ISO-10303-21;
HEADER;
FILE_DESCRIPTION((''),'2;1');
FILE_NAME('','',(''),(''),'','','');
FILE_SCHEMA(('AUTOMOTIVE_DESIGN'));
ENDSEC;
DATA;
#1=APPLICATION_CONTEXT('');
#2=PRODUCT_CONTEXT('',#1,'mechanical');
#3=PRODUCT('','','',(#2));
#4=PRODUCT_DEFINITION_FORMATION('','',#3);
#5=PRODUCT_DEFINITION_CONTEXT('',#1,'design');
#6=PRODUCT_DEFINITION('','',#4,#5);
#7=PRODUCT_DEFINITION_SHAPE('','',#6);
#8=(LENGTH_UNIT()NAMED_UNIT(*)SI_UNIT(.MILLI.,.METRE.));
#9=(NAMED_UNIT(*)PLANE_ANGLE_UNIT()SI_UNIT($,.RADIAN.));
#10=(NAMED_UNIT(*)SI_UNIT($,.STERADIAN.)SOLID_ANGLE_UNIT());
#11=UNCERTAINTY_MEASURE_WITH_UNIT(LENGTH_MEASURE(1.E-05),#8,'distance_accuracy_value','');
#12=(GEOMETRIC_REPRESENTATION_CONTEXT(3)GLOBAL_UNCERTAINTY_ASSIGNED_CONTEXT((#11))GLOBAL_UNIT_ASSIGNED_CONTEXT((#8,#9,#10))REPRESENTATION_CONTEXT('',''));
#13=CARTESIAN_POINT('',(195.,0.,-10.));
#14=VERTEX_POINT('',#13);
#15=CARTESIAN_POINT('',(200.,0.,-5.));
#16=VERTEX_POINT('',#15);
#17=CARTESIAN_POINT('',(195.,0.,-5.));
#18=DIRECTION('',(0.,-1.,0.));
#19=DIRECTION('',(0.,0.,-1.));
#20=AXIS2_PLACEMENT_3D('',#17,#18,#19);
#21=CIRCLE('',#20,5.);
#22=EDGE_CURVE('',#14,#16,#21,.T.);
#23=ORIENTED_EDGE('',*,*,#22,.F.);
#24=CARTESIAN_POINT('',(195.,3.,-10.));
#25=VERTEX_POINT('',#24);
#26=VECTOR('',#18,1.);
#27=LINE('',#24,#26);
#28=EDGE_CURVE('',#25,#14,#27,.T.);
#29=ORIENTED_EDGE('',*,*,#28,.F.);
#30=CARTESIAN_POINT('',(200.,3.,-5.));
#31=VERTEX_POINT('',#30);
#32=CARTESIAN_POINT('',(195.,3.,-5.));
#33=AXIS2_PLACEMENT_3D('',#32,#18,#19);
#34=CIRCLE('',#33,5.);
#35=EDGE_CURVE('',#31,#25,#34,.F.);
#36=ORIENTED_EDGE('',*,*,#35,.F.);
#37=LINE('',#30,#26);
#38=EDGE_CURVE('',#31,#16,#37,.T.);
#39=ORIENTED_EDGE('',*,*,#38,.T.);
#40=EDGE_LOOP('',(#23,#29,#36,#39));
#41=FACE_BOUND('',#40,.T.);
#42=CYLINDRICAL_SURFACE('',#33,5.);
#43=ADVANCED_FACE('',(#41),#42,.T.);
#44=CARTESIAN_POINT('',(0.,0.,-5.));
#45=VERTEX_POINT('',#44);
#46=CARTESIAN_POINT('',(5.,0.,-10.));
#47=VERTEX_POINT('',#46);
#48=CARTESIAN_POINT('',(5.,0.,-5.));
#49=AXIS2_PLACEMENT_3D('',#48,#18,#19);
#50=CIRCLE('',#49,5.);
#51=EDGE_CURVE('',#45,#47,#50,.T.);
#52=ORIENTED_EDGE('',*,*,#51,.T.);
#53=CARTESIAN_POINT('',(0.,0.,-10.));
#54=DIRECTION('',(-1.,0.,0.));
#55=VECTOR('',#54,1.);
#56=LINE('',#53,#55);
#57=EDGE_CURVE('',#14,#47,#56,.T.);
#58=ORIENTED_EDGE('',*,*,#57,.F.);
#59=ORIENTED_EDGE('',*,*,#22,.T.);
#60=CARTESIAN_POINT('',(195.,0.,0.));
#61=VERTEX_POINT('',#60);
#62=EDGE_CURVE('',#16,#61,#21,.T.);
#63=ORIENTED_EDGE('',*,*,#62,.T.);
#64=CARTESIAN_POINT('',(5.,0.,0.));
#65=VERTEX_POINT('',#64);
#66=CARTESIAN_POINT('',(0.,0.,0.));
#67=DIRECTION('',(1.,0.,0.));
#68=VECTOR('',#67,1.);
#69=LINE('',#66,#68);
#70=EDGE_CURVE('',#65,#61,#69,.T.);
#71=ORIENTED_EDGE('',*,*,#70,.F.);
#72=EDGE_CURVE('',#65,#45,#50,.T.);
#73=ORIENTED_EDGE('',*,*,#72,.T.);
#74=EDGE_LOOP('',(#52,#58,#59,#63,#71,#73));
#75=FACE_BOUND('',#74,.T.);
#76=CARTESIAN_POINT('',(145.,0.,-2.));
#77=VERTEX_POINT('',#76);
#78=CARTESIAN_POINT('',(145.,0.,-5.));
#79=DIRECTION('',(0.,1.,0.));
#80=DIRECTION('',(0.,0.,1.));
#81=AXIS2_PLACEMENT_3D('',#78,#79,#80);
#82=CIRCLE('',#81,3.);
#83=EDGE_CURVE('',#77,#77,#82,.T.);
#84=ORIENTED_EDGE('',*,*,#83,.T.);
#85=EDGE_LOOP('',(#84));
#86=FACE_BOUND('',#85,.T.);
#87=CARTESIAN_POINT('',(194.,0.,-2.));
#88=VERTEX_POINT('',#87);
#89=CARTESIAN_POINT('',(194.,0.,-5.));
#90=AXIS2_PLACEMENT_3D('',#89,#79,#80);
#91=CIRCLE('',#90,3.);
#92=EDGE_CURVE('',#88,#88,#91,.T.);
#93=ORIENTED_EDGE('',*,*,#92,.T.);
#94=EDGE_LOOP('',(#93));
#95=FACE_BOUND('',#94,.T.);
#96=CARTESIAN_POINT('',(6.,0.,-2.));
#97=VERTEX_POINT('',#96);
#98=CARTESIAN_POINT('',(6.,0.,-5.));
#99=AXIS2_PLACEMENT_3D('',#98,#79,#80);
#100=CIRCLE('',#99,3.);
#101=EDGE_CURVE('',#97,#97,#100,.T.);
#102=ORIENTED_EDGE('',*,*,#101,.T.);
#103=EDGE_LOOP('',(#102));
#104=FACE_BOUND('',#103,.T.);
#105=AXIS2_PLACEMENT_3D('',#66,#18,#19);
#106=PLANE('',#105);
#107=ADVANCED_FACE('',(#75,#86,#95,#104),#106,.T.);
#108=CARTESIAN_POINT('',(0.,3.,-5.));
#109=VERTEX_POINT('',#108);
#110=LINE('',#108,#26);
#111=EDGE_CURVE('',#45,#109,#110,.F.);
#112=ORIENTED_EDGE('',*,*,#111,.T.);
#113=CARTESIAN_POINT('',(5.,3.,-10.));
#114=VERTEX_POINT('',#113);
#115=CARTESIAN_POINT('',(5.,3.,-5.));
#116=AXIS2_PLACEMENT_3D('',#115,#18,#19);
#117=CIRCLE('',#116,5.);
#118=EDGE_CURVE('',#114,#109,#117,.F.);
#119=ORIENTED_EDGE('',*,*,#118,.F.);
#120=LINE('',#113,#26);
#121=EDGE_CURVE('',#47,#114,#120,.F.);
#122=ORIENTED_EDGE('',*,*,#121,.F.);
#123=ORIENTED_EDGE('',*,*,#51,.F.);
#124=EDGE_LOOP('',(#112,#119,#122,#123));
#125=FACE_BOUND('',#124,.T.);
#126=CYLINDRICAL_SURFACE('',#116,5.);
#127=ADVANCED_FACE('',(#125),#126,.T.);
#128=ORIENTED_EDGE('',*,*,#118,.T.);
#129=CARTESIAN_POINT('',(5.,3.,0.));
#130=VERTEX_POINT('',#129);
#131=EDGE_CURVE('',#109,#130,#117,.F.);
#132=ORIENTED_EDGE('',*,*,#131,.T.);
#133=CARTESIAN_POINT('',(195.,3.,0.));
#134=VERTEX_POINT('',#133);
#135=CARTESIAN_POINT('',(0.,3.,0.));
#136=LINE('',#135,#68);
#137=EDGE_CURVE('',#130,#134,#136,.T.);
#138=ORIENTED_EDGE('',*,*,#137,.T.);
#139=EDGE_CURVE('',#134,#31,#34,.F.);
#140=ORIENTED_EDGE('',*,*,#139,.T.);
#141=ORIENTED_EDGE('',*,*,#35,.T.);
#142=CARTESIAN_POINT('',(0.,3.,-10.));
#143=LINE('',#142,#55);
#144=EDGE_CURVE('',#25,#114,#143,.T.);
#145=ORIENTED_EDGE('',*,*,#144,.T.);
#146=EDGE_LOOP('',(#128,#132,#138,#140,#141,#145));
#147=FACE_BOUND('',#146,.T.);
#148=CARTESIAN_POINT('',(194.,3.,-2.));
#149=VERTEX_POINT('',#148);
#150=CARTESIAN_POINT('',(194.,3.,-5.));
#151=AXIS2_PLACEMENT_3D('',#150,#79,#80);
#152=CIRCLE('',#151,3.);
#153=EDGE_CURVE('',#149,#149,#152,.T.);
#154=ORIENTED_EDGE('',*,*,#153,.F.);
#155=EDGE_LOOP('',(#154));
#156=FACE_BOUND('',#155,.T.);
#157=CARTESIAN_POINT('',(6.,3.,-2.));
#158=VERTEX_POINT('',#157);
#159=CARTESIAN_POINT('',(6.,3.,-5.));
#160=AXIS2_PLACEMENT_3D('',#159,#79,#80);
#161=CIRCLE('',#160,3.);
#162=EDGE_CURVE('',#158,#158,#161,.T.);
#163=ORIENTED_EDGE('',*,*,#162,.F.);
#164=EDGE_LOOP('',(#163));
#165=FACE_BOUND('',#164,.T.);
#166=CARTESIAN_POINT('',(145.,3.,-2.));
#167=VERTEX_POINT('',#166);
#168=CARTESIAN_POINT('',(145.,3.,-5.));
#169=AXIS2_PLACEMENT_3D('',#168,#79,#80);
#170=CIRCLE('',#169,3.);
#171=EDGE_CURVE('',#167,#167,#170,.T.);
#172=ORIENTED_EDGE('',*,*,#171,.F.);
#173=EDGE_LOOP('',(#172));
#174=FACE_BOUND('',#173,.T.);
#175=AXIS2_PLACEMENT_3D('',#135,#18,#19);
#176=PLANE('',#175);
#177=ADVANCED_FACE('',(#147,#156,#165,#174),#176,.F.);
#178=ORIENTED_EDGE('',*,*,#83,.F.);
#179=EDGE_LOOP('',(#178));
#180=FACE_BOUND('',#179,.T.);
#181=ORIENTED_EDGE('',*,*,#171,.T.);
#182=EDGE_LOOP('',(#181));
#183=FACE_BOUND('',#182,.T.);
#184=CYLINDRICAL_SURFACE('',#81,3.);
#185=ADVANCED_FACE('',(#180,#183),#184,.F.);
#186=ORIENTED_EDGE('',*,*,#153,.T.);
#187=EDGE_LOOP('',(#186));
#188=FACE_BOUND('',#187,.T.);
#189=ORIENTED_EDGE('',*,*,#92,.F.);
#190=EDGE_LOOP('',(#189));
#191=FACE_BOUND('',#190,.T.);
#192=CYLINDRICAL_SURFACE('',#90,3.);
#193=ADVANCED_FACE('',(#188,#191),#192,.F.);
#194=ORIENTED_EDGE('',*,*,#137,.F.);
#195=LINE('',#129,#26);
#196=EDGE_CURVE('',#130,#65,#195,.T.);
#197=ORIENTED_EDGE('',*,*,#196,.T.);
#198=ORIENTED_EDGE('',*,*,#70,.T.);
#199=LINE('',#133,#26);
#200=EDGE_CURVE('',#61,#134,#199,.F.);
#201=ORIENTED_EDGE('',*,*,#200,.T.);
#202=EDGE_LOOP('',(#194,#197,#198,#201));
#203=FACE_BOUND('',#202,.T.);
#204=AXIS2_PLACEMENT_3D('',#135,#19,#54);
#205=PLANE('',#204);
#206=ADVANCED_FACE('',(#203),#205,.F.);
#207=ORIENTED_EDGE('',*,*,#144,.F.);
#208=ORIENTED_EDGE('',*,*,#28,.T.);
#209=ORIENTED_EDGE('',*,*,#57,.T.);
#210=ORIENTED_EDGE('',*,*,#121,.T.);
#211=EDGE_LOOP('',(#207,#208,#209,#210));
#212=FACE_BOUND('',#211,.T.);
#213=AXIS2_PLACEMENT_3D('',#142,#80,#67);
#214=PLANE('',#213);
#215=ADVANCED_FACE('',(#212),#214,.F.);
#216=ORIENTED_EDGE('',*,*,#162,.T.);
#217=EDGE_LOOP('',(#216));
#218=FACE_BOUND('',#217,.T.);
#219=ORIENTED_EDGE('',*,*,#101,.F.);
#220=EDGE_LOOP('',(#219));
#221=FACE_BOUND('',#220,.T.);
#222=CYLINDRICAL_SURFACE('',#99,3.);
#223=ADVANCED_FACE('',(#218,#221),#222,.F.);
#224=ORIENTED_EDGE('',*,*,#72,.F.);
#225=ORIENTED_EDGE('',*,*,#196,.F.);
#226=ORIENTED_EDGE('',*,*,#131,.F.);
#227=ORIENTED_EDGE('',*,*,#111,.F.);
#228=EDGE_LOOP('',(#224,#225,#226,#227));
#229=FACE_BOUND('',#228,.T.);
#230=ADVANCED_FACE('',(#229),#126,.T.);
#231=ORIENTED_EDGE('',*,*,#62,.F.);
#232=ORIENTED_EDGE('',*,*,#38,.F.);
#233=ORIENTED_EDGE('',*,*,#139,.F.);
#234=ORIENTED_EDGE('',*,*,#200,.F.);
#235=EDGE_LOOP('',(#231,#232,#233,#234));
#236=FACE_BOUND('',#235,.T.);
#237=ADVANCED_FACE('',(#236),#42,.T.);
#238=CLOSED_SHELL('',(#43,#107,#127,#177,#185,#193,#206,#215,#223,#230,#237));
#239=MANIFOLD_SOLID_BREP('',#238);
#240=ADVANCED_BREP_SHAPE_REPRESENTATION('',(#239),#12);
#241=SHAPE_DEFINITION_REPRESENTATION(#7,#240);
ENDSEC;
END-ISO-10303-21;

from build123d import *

# Parameters (mm, degrees)
SKETCH2_W           = 200
SKETCH2_H           = 10
BOSS_EXTRUDE1_DEPTH = 3
SKETCH3_R           = 3
CUT_EXTRUDE1_DEPTH  = 201.272314612
SKETCH4_R           = 3
CUT_EXTRUDE2_DEPTH  = 201.272314612
FILLET1_R           = 5
FILLET2_R           = 5
SKETCH5_R           = 3
CUT_EXTRUDE3_DEPTH  = 201.272314612


with BuildPart() as part:
    # Sketch2 → Boss-Extrude1 (new body)
    with BuildSketch(Plane(origin=(0, 0, 0), x_dir=(1, 0, 0), z_dir=(0, 1, 0))):
        with Locations((100, 5)):
            Rectangle(SKETCH2_W, SKETCH2_H)
    extrude(amount=BOSS_EXTRUDE1_DEPTH)

    # Sketch3 → Cut-Extrude1 (cut, through all)
    with BuildSketch(Plane(origin=(0, 3, 0), x_dir=(1, 0, 0), z_dir=(0, 1, 0))):
        with Locations(Location((6, 5, 0), (0, 0, 270))):
            Circle(SKETCH3_R)
    extrude(amount=-CUT_EXTRUDE1_DEPTH, mode=Mode.SUBTRACT)

    # Sketch4 → Cut-Extrude2 (cut, through all)
    with BuildSketch(Plane(origin=(0, 3, 0), x_dir=(1, 0, 0), z_dir=(0, 1, 0))):
        with Locations(Location((194, 5, 0), (0, 0, 270))):
            Circle(SKETCH4_R)
    extrude(amount=-CUT_EXTRUDE2_DEPTH, mode=Mode.SUBTRACT)

    # Fillet1
    fillet1_edges = [part.edges().sort_by_distance(p)[0] for p in [
        (0, 1.5, -10),
        (0, 1.5, 0),
    ]]
    fillet(fillet1_edges, radius=FILLET1_R - 0.0001)  # a hair under: the kernel refuses the full size

    # Fillet2
    fillet2_edges = [part.edges().sort_by_distance(p)[0] for p in [
        (200, 1.5, -10),
        (200, 1.5, 0),
    ]]
    fillet(fillet2_edges, radius=FILLET2_R - 0.0001)  # a hair under: the kernel refuses the full size

    # Sketch5 → Cut-Extrude3 (cut, through all)
    with BuildSketch(Plane(origin=(0, 3, 0), x_dir=(1, 0, 0), z_dir=(0, 1, 0))):
        with Locations(Location((145, 5, 0), (0, 0, 270))):
            Circle(SKETCH5_R)
    extrude(amount=-CUT_EXTRUDE3_DEPTH, mode=Mode.SUBTRACT)


solid = part.part
